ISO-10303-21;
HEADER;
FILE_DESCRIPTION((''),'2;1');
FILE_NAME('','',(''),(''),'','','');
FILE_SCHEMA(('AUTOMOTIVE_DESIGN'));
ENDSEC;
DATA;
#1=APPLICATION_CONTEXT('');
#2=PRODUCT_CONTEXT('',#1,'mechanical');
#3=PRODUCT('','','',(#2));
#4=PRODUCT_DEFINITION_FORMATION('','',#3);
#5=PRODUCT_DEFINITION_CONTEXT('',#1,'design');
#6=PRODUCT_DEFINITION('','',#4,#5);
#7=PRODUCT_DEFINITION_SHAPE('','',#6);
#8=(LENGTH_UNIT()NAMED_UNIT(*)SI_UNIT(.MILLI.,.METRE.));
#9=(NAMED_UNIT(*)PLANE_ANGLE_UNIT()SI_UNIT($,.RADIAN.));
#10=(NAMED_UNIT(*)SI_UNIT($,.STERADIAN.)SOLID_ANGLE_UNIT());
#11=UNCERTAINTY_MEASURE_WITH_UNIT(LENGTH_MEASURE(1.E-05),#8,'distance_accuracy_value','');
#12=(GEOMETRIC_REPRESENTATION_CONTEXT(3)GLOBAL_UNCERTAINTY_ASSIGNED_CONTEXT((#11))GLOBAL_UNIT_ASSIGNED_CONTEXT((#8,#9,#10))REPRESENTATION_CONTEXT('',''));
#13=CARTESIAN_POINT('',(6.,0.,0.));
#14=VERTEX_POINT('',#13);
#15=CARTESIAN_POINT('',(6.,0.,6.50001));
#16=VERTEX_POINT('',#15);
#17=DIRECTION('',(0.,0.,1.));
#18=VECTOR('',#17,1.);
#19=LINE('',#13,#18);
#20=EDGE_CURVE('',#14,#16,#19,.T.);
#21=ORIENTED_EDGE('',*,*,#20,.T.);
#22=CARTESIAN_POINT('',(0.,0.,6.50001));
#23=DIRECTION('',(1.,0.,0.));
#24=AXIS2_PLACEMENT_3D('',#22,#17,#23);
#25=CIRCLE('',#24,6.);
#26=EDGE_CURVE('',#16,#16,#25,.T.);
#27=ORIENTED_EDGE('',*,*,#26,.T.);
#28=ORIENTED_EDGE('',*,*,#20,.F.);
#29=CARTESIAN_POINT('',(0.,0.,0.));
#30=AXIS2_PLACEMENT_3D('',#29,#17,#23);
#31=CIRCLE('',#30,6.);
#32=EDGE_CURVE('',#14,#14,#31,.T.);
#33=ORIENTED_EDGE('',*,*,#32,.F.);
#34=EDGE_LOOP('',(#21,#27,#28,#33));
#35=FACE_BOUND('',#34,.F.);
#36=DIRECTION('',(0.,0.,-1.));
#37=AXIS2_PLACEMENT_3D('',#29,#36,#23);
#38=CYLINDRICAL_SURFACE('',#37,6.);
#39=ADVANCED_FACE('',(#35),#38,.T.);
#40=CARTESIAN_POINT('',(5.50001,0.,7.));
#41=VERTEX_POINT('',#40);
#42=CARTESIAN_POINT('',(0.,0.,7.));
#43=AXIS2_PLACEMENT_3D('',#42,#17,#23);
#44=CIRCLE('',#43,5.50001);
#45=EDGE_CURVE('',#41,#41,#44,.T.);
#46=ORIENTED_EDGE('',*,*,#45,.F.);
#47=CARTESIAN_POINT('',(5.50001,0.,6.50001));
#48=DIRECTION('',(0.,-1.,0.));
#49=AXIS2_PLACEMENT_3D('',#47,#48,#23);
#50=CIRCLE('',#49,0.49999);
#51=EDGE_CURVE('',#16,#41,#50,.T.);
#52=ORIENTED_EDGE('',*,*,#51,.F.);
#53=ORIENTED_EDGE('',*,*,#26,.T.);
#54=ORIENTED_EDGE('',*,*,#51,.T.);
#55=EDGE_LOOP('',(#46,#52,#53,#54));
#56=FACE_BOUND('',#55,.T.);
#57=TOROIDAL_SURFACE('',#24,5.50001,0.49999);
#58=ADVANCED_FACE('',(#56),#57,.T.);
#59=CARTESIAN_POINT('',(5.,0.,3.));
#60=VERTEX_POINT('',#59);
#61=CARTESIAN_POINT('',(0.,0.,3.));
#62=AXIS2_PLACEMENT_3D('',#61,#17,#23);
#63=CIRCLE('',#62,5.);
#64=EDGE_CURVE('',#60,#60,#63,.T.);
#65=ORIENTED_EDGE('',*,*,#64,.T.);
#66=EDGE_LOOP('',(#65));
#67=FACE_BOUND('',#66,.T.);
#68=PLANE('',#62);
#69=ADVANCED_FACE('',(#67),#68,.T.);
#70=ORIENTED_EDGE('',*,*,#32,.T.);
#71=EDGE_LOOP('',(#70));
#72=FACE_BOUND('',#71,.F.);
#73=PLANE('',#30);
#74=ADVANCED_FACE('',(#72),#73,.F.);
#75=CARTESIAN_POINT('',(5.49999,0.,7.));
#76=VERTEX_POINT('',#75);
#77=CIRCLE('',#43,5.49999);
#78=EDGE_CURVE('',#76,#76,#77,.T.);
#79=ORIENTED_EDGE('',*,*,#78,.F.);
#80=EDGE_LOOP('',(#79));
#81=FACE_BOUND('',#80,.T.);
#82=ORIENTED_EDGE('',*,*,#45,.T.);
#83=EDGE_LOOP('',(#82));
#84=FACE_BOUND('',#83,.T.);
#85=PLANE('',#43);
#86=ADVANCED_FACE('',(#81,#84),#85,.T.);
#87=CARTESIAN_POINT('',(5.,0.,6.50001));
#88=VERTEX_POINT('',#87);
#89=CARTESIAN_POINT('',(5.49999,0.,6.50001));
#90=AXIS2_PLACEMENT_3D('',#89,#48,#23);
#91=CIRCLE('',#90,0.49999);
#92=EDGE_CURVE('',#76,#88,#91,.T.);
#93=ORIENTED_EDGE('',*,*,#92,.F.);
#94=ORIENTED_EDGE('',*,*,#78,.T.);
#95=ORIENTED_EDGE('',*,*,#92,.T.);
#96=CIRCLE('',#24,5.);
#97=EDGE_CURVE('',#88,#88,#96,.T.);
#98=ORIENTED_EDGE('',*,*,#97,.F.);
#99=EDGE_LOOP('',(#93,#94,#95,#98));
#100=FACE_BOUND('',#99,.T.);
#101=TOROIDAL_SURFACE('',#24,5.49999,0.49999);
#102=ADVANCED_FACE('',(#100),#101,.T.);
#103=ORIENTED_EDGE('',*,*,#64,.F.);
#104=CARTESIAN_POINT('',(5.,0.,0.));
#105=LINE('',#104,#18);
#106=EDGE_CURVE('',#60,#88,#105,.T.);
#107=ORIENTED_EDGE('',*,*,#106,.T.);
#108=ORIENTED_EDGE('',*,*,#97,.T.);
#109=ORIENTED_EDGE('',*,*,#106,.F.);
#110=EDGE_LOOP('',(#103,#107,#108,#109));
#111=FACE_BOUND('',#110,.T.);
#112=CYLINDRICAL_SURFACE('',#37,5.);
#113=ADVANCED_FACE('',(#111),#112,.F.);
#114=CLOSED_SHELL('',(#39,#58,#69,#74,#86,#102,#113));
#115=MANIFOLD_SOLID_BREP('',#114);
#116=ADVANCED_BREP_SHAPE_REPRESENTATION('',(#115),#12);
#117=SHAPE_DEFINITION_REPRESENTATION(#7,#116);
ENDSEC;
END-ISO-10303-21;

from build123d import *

# Parameters (mm, degrees)
F0_R     = 6
F0_R_2   = 5
F1_DEPTH = 7
F2_DEPTH = 3
F3_R     = 0.49999


# Not quite as in the source:
# - a fillet or chamfer is up to 0.001 mm smaller than in the source, because OpenCascade refuses the exact size


with BuildPart() as f1:
    # F0 (on Top) → F1 (new body)
    with BuildSketch(Plane.XY):
        Circle(F0_R)
        Circle(F0_R_2, mode=Mode.SUBTRACT)
    extrude(amount=F1_DEPTH)

    # F0 (on Top) → F2 (join)
    with BuildSketch(Plane.XY):
        Circle(F0_R_2)
    extrude(amount=F2_DEPTH)

    # F3 (radius 0.5 in the source; OpenCascade refuses exactly that, so slightly less here)
    f3_edges = [f1.edges().sort_by_distance(p)[0] for p in [
        (-6, 0, 7),
        (-5, 0, 7),
    ]]
    fillet(f3_edges, radius=F3_R)


solid = f1.part
